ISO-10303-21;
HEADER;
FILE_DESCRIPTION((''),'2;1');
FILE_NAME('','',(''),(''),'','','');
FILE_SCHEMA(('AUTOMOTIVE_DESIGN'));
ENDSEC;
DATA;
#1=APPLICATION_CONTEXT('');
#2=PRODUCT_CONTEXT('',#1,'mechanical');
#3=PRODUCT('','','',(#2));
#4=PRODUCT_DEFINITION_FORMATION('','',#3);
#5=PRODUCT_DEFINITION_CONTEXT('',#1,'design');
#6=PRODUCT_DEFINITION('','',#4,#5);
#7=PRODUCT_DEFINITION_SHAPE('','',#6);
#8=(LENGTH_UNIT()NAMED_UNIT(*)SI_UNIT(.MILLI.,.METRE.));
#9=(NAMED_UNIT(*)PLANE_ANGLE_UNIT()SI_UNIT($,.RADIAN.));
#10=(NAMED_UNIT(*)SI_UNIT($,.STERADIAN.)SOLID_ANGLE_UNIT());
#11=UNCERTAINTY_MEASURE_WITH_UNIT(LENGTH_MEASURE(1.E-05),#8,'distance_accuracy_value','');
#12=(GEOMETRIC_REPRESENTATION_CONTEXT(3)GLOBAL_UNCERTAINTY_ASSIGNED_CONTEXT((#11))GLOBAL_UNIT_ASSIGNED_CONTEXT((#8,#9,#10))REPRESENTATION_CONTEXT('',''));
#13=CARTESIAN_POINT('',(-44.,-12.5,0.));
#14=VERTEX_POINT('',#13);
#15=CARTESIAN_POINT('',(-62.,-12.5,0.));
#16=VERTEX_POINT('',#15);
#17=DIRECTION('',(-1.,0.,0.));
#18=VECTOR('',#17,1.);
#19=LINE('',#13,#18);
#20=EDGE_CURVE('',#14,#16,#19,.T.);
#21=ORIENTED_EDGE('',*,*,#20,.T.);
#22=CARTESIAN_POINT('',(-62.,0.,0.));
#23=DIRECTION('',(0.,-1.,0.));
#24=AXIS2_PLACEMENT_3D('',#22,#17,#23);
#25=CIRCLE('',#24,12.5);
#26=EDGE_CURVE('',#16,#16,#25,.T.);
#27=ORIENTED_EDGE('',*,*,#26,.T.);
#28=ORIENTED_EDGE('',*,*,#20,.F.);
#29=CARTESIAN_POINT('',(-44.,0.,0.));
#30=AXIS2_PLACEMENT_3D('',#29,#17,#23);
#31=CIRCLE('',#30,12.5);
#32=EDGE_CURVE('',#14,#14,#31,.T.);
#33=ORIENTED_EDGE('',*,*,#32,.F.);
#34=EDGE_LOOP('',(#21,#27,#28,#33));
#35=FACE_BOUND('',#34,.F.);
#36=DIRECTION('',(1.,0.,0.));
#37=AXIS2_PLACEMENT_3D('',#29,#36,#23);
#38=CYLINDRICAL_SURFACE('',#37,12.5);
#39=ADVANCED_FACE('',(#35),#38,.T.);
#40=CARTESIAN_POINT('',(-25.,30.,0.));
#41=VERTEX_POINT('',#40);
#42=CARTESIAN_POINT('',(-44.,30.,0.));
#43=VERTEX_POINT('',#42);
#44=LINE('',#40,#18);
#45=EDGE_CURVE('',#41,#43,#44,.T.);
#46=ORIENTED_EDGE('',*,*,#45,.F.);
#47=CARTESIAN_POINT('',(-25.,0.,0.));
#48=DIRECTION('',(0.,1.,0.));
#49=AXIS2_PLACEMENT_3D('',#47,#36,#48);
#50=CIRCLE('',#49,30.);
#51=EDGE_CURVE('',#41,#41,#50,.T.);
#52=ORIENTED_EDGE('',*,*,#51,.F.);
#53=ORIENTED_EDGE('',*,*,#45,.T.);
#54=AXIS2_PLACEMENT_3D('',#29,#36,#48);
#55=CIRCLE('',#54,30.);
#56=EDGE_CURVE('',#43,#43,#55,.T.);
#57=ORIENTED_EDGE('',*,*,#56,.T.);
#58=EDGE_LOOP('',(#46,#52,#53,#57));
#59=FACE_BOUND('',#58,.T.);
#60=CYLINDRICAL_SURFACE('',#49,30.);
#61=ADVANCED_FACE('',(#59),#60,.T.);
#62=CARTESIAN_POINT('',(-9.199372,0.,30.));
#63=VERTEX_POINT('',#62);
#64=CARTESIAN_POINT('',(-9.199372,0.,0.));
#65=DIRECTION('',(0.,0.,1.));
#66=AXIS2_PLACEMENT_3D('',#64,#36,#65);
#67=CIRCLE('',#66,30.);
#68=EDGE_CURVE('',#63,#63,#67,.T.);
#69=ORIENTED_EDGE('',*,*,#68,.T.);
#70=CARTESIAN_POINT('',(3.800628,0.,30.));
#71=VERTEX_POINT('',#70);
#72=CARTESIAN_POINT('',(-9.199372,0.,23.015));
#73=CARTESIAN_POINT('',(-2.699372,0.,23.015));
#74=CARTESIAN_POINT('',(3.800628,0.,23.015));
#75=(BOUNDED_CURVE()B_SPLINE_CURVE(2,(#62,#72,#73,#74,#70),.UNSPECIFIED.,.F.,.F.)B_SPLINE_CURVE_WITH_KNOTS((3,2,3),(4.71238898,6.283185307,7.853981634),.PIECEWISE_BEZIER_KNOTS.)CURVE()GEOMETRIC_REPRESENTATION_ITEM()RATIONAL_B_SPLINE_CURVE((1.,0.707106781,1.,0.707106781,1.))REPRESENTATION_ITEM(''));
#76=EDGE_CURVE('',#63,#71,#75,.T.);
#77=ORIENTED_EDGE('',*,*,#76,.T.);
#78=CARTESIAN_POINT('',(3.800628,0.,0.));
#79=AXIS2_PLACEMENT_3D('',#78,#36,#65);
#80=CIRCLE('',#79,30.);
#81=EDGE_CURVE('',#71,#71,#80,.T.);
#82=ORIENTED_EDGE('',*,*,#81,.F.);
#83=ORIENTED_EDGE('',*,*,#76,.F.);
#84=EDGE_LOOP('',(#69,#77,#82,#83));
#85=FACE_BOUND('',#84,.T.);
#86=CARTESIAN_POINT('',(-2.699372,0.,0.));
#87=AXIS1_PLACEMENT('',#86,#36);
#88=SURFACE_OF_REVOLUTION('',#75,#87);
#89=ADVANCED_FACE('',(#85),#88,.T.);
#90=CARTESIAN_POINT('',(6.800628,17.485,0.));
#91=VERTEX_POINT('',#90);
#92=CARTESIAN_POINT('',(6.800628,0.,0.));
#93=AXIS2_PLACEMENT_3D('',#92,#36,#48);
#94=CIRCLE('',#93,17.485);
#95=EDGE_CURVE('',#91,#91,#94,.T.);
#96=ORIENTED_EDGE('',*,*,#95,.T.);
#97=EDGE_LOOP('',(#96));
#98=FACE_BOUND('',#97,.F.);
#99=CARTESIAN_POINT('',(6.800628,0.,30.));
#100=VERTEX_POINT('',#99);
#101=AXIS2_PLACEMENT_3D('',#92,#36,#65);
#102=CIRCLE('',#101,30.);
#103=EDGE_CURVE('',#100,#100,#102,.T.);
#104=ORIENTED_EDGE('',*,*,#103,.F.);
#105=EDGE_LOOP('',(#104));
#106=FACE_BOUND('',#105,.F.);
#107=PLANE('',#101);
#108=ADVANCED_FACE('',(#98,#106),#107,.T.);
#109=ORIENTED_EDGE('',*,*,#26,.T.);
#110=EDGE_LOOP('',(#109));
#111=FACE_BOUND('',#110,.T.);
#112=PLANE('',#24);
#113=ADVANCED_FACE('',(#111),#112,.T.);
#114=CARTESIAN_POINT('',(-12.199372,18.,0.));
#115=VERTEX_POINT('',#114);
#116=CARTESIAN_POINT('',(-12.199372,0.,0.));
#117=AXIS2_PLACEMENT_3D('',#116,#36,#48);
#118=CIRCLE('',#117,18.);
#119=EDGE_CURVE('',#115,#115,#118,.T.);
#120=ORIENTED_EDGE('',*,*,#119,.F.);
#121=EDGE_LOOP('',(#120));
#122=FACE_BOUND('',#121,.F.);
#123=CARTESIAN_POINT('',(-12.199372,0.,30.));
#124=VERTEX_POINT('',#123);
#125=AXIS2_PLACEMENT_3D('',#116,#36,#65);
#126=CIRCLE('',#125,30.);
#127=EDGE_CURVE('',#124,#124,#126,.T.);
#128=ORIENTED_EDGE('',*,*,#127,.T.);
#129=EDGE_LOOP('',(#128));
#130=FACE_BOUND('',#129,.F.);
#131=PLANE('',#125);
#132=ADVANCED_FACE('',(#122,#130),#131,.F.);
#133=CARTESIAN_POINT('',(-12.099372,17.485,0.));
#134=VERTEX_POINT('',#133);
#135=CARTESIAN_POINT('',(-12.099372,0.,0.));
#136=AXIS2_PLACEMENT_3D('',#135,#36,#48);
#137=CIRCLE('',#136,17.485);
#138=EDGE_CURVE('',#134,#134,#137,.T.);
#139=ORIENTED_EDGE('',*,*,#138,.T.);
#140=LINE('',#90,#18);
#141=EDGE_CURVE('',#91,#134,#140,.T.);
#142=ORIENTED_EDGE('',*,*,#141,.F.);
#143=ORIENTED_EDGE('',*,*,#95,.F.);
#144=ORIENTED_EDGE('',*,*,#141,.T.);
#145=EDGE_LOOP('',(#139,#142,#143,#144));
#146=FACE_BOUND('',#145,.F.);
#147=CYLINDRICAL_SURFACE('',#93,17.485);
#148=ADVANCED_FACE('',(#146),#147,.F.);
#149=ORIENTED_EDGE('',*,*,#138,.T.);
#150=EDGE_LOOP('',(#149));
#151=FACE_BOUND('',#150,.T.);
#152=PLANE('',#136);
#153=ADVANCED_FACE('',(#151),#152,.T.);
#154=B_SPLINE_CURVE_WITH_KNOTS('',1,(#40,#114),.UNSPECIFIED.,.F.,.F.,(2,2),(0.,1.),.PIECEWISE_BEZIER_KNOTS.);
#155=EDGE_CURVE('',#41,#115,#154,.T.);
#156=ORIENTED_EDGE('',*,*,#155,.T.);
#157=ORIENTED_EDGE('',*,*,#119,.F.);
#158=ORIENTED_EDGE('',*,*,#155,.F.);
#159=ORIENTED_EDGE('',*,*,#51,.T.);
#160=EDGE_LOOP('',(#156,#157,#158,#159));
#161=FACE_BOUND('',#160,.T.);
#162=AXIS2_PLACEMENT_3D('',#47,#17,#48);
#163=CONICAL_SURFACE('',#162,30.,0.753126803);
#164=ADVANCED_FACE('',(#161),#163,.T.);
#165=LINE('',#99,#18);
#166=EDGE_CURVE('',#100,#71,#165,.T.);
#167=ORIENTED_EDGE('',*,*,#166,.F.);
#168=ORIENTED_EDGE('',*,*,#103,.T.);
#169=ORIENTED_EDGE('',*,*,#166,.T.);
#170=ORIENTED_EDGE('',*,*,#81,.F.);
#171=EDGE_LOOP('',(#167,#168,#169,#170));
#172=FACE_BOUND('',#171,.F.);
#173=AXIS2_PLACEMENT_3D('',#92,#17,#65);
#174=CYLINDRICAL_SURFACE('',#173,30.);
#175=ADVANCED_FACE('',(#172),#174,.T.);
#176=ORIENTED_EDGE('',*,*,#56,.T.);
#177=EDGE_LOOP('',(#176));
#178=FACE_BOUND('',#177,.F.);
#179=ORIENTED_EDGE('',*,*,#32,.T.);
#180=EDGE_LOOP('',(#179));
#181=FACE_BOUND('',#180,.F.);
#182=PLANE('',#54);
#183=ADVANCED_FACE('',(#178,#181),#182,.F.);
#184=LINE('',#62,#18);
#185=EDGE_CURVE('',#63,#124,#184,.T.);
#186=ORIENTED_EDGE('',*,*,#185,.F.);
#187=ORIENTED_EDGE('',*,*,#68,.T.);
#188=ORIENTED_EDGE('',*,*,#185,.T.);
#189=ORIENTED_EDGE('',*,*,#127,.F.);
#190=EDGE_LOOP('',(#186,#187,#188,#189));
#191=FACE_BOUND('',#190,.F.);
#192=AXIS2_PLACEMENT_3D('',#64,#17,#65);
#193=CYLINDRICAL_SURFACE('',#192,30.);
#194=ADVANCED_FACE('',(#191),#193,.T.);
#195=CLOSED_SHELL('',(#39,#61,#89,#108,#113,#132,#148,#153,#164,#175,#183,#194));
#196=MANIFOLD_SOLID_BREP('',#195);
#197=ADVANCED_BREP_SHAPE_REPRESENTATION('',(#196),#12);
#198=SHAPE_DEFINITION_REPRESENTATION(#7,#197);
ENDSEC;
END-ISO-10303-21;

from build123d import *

# Parameters (mm, degrees)
F2_R      = 17.485
F3_DEPTH  = 18.9
F6_R      = 30
F4_R      = 18
F8_DEPTH  = 19
F9_R      = 12.5
F10_DEPTH = 18


with BuildPart() as f1:
    # F0 (on Front) → F1 (revolve)
    with BuildSketch(Plane.XZ):
        with BuildLine():
            Line((-12.1993720531, 30), (-12.1993720531, 0))
            Line((-12.1993720531, 0), (6.8006279469, 0))
            Line((6.8006279469, 0), (6.8006279469, 30))
            Line((6.8006279469, 30), (3.8006279469, 30))
            add(Edge.make_bspline(
                [(-9.1993720531, 30), (-9.1993720531, 23.015), (-2.6993720531, 23.015), (3.8006279469, 23.015), (3.8006279469, 30)],
                knots=[4.7123889804, 4.7123889804, 4.7123889804, 6.2831853072, 6.2831853072, 7.853981634, 7.853981634, 7.853981634], degree=2, weights=[1, 0.7071067812, 1, 0.7071067812, 1]))
            Line((-9.1993720531, 30), (-12.1993720531, 30))
        make_face()
    revolve(axis=Axis((-2.6993720531, 0, 0), (1, 0, 0)))

    # F2 (on face) → F3 (cut)
    with BuildSketch(Plane.YZ.offset(6.8006279469)):
        Circle(F2_R)
    extrude(amount=-F3_DEPTH, mode=Mode.SUBTRACT)

    # F6 (on offset) → F7 section 0
    with BuildSketch(Plane.YZ.offset(-25)):
        Circle(F6_R)
    # F4 (on face) → F7 section 1
    with BuildSketch(Plane(origin=(-12.1993720531, 0, 0), x_dir=(0, -1, 0), z_dir=(-1, 0, 0))):
        Circle(F4_R)
    loft()

    # F8 (add): a face of the model
    f8_faces = [f1.faces().sort_by_distance(p)[0] for p in [
        (-25, 0, 0),
    ]]
    extrude(f8_faces, amount=F8_DEPTH)

    # F9 (on face) → F10 (join)
    with BuildSketch(Plane(origin=(-44, 0, 0), x_dir=(0, -1, 0), z_dir=(-1, 0, 0))):
        Circle(F9_R)
    extrude(amount=F10_DEPTH)


solid = f1.part
